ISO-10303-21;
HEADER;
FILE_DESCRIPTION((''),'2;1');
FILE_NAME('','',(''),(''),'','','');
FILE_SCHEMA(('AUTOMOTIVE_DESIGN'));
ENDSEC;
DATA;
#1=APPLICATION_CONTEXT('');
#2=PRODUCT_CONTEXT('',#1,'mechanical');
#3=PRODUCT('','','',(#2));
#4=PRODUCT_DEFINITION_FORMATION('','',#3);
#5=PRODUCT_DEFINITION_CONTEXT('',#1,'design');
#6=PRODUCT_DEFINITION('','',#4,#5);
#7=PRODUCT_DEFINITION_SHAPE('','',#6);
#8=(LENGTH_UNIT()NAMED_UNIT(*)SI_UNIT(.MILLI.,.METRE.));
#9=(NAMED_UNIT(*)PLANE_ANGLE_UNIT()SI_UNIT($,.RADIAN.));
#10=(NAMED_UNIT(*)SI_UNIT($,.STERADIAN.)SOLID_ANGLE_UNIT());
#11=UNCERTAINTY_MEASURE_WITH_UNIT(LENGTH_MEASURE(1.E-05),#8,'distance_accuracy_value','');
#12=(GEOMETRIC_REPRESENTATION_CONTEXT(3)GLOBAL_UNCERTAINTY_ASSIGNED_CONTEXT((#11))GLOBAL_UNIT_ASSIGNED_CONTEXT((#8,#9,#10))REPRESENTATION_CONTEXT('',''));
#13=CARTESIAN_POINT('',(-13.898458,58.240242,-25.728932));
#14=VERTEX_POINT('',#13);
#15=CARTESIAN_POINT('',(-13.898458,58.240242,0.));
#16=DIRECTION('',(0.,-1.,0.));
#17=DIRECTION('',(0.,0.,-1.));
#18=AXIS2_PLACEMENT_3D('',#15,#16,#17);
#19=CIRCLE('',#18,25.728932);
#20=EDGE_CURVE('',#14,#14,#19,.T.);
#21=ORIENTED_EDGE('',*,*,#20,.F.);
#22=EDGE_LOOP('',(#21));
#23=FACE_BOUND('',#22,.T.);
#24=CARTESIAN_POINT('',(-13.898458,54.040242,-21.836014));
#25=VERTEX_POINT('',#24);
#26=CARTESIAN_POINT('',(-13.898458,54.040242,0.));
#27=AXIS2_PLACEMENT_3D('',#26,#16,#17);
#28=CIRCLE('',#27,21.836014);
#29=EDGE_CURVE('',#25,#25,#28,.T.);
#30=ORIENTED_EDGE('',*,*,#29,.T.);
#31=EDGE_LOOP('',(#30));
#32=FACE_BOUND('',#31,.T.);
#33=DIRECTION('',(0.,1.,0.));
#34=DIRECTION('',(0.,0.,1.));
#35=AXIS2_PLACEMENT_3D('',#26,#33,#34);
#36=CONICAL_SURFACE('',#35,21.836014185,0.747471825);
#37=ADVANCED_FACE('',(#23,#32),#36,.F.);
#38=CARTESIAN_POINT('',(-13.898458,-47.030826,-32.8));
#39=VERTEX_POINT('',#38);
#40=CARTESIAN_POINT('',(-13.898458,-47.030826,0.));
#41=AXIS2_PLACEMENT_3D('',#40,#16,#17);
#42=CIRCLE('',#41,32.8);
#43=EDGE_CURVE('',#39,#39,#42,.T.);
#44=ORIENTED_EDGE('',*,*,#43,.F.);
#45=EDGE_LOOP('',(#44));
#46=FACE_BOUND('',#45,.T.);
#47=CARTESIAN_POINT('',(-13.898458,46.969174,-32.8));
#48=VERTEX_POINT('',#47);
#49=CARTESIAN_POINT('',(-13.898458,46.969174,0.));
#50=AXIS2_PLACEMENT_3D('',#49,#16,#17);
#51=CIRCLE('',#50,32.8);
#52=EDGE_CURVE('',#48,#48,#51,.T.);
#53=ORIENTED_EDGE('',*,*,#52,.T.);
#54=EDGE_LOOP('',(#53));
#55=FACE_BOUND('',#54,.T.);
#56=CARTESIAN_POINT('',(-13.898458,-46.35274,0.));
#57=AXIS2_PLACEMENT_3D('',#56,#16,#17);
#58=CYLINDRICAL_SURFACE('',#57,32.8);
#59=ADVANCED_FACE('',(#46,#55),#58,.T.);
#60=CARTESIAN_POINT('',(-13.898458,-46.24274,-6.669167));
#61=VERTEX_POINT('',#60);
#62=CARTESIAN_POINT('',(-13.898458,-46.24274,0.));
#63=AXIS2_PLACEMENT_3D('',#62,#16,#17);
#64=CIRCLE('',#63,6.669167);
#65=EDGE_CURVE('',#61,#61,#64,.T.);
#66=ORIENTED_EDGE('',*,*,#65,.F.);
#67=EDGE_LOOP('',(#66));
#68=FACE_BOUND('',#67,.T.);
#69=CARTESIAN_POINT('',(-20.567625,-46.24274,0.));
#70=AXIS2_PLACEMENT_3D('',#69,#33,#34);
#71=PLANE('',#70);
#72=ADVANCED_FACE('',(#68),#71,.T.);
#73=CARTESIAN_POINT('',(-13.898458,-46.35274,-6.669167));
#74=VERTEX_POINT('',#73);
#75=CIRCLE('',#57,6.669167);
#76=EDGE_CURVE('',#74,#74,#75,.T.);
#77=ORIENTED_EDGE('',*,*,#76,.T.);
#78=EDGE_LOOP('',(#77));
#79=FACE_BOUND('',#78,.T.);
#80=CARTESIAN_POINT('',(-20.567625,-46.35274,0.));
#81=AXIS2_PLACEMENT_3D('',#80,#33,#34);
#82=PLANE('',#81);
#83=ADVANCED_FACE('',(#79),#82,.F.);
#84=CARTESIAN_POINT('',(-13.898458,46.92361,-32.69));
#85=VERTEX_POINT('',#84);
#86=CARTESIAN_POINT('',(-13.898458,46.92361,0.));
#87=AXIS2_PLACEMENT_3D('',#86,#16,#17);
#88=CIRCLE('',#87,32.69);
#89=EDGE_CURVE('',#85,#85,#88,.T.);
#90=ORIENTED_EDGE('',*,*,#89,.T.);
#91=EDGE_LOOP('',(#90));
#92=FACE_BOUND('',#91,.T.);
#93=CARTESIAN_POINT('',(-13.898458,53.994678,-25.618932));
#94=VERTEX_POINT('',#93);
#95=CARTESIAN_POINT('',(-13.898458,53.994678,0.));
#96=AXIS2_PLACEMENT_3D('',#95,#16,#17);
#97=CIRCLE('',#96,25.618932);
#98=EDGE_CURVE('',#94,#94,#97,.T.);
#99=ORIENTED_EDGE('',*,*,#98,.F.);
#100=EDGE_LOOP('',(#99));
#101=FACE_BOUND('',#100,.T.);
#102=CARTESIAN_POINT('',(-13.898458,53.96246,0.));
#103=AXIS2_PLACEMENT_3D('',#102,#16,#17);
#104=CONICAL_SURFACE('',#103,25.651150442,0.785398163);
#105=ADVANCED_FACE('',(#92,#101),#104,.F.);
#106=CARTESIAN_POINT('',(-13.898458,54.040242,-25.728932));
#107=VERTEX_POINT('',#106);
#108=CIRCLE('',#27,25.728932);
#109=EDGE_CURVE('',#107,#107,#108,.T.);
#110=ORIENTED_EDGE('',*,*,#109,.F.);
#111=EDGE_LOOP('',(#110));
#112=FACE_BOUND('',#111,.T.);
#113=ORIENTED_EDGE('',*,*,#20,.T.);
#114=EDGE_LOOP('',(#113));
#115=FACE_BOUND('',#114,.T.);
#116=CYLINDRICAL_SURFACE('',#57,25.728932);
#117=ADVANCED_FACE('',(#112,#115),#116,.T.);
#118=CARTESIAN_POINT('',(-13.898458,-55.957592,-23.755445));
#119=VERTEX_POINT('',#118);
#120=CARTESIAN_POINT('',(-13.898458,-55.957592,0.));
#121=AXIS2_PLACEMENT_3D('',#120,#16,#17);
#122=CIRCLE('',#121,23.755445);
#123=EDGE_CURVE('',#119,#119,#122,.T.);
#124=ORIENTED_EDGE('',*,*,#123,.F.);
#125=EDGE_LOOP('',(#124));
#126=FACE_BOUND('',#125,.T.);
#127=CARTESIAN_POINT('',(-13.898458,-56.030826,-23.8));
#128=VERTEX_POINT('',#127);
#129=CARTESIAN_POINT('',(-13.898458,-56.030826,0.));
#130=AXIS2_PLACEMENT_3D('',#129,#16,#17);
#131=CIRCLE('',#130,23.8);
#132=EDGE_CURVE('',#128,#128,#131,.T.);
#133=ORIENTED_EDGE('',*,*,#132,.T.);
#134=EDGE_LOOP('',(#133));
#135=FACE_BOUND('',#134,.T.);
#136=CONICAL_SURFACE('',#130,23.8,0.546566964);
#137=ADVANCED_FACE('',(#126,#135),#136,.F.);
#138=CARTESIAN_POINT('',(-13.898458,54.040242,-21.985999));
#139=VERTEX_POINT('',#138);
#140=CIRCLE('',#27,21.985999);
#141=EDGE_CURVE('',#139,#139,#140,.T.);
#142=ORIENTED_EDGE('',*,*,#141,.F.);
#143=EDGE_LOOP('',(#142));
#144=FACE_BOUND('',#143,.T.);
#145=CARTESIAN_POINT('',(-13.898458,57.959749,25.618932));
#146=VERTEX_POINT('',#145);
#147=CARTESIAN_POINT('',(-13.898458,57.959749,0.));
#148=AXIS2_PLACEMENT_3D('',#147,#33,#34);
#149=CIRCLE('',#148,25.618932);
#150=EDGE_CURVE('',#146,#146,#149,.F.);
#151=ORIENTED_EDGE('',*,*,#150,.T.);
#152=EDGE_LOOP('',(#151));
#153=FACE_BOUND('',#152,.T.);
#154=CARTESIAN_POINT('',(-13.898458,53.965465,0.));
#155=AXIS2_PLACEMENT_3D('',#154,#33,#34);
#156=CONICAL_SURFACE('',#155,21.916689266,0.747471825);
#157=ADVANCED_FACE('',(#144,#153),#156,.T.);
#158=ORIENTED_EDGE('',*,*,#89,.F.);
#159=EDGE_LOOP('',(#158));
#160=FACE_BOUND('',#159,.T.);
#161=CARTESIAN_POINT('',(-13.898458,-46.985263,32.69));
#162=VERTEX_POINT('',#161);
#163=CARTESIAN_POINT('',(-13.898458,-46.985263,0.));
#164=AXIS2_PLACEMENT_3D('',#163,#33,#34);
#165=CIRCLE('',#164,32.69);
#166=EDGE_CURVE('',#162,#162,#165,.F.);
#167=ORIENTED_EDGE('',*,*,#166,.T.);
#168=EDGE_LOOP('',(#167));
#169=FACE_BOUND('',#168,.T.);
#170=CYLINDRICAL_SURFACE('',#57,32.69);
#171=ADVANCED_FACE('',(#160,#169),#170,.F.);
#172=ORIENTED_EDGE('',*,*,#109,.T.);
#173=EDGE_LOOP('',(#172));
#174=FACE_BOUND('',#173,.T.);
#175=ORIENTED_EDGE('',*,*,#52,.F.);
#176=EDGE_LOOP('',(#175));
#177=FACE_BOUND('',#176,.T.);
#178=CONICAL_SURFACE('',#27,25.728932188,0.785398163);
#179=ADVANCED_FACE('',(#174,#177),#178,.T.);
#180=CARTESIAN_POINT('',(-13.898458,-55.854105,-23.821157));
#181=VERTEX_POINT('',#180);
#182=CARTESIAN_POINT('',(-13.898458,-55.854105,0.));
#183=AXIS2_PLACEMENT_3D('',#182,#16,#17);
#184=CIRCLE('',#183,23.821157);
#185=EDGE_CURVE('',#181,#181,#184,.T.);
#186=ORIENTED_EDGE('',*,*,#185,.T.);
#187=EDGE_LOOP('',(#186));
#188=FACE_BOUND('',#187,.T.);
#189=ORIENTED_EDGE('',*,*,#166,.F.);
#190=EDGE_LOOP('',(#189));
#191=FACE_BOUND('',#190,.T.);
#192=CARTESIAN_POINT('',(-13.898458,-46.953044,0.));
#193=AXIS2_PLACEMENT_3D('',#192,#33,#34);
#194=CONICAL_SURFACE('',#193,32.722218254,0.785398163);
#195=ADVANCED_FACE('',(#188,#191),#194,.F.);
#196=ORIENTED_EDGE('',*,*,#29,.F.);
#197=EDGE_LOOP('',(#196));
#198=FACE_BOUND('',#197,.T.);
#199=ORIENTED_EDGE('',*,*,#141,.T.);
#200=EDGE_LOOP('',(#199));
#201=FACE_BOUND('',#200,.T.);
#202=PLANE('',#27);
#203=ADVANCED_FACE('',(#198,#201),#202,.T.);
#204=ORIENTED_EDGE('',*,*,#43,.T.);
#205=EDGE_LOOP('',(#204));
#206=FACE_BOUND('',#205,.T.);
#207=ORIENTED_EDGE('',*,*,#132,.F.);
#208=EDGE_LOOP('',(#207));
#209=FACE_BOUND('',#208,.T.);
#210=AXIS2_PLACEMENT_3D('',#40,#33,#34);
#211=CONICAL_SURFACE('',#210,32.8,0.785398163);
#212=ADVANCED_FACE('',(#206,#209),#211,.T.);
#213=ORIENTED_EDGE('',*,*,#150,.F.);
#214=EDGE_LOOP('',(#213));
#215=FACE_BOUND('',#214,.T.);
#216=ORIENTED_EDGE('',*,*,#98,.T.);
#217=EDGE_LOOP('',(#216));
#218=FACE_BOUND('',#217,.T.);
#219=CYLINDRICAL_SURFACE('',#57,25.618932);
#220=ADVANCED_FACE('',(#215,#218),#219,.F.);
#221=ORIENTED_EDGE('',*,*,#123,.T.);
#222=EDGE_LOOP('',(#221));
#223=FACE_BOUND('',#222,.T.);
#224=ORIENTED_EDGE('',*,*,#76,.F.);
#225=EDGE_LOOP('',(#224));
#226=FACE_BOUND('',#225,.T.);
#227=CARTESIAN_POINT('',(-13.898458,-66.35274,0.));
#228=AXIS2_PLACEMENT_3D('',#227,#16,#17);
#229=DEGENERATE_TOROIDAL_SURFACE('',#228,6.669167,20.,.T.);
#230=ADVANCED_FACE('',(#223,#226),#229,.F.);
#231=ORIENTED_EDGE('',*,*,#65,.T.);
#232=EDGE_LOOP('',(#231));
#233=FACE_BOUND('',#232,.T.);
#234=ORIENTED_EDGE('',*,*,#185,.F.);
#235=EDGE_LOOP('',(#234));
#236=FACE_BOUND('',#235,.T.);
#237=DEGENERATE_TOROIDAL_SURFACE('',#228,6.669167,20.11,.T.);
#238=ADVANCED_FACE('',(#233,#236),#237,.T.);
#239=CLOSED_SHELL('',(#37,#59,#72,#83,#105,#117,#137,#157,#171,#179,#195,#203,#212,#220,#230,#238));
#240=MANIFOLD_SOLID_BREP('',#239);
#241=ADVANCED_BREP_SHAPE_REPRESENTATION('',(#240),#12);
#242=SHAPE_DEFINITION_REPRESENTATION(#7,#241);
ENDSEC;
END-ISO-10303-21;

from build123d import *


# Read off the part's stored shape, not the designer's step: Coque1
with BuildPart() as part:
    # Esquisse2 → Révolution1 (revolve)
    with BuildSketch(Plane.XY, mode=Mode.PRIVATE) as r_volution1_sk:
        with BuildLine():
            Line((-13.898458102, 54.040241613), (-35.734472287, 54.040241613))
            Line((-35.734472287, 54.040241613), (-39.62739029, 58.240241613))
            Line((-39.62739029, 58.240241613), (-39.62739029, 54.040241613))
            Line((-39.62739029, 54.040241613), (-46.698458102, 46.969173801))
            Line((-46.698458102, 46.969173801), (-46.698458102, -47.030826199))
            Line((-46.698458102, -47.030826199), (-37.698458102, -56.030826199))
            Line((-37.698458102, -56.030826199), (-37.653902917, -55.957591814))
            ThreePointArc((-37.653902917, -55.957591814), (-30.368059552, -48.918535602), (-20.567624939, -46.352739954))
            Line((-20.567624939, -46.352739954), (-13.898458102, -46.352739954))
            Line((-13.898458102, -46.352739954), (-13.898458102, 54.040241613))
        make_face()
    revolve(r_volution1_sk.sketch.rotate(Axis((-13.898458102, -46.352739954, 0), (0, 1, 0)), 270), axis=Axis((-13.898458102, -46.352739954, 0), (0, 1, 0)))

    # Coque1 outline → Coque1 (revolve, cut)
    with BuildSketch(Plane(origin=(-13.898458102, 0, 0), x_dir=(1, 0, 0), z_dir=(0, 0, 1))):
        with BuildLine():
            Line((21.985998539, 54.040241613), (0, 54.040241613))
            Line((0, 54.040241613), (0, -46.242739954))
            Line((0, -46.242739954), (6.669166837, -46.242739954))
            ThreePointArc((6.669166837, -46.242739954), (16.499847403, -48.809370278), (23.821157224, -55.854105483))
            Line((23.821157224, -55.854105483), (32.69, -46.985262707))
            Line((32.69, -46.985262707), (32.69, 46.92361031))
            Line((32.69, 46.92361031), (25.618932188, 53.994678121))
            Line((25.618932188, 53.994678121), (25.618932188, 57.959749117))
            Line((25.618932188, 57.959749117), (21.985998539, 54.040241613))
        make_face()
    revolve(axis=Axis((-13.898458102, 0, 0), (0, 1, 0)), mode=Mode.SUBTRACT)


solid = part.part
